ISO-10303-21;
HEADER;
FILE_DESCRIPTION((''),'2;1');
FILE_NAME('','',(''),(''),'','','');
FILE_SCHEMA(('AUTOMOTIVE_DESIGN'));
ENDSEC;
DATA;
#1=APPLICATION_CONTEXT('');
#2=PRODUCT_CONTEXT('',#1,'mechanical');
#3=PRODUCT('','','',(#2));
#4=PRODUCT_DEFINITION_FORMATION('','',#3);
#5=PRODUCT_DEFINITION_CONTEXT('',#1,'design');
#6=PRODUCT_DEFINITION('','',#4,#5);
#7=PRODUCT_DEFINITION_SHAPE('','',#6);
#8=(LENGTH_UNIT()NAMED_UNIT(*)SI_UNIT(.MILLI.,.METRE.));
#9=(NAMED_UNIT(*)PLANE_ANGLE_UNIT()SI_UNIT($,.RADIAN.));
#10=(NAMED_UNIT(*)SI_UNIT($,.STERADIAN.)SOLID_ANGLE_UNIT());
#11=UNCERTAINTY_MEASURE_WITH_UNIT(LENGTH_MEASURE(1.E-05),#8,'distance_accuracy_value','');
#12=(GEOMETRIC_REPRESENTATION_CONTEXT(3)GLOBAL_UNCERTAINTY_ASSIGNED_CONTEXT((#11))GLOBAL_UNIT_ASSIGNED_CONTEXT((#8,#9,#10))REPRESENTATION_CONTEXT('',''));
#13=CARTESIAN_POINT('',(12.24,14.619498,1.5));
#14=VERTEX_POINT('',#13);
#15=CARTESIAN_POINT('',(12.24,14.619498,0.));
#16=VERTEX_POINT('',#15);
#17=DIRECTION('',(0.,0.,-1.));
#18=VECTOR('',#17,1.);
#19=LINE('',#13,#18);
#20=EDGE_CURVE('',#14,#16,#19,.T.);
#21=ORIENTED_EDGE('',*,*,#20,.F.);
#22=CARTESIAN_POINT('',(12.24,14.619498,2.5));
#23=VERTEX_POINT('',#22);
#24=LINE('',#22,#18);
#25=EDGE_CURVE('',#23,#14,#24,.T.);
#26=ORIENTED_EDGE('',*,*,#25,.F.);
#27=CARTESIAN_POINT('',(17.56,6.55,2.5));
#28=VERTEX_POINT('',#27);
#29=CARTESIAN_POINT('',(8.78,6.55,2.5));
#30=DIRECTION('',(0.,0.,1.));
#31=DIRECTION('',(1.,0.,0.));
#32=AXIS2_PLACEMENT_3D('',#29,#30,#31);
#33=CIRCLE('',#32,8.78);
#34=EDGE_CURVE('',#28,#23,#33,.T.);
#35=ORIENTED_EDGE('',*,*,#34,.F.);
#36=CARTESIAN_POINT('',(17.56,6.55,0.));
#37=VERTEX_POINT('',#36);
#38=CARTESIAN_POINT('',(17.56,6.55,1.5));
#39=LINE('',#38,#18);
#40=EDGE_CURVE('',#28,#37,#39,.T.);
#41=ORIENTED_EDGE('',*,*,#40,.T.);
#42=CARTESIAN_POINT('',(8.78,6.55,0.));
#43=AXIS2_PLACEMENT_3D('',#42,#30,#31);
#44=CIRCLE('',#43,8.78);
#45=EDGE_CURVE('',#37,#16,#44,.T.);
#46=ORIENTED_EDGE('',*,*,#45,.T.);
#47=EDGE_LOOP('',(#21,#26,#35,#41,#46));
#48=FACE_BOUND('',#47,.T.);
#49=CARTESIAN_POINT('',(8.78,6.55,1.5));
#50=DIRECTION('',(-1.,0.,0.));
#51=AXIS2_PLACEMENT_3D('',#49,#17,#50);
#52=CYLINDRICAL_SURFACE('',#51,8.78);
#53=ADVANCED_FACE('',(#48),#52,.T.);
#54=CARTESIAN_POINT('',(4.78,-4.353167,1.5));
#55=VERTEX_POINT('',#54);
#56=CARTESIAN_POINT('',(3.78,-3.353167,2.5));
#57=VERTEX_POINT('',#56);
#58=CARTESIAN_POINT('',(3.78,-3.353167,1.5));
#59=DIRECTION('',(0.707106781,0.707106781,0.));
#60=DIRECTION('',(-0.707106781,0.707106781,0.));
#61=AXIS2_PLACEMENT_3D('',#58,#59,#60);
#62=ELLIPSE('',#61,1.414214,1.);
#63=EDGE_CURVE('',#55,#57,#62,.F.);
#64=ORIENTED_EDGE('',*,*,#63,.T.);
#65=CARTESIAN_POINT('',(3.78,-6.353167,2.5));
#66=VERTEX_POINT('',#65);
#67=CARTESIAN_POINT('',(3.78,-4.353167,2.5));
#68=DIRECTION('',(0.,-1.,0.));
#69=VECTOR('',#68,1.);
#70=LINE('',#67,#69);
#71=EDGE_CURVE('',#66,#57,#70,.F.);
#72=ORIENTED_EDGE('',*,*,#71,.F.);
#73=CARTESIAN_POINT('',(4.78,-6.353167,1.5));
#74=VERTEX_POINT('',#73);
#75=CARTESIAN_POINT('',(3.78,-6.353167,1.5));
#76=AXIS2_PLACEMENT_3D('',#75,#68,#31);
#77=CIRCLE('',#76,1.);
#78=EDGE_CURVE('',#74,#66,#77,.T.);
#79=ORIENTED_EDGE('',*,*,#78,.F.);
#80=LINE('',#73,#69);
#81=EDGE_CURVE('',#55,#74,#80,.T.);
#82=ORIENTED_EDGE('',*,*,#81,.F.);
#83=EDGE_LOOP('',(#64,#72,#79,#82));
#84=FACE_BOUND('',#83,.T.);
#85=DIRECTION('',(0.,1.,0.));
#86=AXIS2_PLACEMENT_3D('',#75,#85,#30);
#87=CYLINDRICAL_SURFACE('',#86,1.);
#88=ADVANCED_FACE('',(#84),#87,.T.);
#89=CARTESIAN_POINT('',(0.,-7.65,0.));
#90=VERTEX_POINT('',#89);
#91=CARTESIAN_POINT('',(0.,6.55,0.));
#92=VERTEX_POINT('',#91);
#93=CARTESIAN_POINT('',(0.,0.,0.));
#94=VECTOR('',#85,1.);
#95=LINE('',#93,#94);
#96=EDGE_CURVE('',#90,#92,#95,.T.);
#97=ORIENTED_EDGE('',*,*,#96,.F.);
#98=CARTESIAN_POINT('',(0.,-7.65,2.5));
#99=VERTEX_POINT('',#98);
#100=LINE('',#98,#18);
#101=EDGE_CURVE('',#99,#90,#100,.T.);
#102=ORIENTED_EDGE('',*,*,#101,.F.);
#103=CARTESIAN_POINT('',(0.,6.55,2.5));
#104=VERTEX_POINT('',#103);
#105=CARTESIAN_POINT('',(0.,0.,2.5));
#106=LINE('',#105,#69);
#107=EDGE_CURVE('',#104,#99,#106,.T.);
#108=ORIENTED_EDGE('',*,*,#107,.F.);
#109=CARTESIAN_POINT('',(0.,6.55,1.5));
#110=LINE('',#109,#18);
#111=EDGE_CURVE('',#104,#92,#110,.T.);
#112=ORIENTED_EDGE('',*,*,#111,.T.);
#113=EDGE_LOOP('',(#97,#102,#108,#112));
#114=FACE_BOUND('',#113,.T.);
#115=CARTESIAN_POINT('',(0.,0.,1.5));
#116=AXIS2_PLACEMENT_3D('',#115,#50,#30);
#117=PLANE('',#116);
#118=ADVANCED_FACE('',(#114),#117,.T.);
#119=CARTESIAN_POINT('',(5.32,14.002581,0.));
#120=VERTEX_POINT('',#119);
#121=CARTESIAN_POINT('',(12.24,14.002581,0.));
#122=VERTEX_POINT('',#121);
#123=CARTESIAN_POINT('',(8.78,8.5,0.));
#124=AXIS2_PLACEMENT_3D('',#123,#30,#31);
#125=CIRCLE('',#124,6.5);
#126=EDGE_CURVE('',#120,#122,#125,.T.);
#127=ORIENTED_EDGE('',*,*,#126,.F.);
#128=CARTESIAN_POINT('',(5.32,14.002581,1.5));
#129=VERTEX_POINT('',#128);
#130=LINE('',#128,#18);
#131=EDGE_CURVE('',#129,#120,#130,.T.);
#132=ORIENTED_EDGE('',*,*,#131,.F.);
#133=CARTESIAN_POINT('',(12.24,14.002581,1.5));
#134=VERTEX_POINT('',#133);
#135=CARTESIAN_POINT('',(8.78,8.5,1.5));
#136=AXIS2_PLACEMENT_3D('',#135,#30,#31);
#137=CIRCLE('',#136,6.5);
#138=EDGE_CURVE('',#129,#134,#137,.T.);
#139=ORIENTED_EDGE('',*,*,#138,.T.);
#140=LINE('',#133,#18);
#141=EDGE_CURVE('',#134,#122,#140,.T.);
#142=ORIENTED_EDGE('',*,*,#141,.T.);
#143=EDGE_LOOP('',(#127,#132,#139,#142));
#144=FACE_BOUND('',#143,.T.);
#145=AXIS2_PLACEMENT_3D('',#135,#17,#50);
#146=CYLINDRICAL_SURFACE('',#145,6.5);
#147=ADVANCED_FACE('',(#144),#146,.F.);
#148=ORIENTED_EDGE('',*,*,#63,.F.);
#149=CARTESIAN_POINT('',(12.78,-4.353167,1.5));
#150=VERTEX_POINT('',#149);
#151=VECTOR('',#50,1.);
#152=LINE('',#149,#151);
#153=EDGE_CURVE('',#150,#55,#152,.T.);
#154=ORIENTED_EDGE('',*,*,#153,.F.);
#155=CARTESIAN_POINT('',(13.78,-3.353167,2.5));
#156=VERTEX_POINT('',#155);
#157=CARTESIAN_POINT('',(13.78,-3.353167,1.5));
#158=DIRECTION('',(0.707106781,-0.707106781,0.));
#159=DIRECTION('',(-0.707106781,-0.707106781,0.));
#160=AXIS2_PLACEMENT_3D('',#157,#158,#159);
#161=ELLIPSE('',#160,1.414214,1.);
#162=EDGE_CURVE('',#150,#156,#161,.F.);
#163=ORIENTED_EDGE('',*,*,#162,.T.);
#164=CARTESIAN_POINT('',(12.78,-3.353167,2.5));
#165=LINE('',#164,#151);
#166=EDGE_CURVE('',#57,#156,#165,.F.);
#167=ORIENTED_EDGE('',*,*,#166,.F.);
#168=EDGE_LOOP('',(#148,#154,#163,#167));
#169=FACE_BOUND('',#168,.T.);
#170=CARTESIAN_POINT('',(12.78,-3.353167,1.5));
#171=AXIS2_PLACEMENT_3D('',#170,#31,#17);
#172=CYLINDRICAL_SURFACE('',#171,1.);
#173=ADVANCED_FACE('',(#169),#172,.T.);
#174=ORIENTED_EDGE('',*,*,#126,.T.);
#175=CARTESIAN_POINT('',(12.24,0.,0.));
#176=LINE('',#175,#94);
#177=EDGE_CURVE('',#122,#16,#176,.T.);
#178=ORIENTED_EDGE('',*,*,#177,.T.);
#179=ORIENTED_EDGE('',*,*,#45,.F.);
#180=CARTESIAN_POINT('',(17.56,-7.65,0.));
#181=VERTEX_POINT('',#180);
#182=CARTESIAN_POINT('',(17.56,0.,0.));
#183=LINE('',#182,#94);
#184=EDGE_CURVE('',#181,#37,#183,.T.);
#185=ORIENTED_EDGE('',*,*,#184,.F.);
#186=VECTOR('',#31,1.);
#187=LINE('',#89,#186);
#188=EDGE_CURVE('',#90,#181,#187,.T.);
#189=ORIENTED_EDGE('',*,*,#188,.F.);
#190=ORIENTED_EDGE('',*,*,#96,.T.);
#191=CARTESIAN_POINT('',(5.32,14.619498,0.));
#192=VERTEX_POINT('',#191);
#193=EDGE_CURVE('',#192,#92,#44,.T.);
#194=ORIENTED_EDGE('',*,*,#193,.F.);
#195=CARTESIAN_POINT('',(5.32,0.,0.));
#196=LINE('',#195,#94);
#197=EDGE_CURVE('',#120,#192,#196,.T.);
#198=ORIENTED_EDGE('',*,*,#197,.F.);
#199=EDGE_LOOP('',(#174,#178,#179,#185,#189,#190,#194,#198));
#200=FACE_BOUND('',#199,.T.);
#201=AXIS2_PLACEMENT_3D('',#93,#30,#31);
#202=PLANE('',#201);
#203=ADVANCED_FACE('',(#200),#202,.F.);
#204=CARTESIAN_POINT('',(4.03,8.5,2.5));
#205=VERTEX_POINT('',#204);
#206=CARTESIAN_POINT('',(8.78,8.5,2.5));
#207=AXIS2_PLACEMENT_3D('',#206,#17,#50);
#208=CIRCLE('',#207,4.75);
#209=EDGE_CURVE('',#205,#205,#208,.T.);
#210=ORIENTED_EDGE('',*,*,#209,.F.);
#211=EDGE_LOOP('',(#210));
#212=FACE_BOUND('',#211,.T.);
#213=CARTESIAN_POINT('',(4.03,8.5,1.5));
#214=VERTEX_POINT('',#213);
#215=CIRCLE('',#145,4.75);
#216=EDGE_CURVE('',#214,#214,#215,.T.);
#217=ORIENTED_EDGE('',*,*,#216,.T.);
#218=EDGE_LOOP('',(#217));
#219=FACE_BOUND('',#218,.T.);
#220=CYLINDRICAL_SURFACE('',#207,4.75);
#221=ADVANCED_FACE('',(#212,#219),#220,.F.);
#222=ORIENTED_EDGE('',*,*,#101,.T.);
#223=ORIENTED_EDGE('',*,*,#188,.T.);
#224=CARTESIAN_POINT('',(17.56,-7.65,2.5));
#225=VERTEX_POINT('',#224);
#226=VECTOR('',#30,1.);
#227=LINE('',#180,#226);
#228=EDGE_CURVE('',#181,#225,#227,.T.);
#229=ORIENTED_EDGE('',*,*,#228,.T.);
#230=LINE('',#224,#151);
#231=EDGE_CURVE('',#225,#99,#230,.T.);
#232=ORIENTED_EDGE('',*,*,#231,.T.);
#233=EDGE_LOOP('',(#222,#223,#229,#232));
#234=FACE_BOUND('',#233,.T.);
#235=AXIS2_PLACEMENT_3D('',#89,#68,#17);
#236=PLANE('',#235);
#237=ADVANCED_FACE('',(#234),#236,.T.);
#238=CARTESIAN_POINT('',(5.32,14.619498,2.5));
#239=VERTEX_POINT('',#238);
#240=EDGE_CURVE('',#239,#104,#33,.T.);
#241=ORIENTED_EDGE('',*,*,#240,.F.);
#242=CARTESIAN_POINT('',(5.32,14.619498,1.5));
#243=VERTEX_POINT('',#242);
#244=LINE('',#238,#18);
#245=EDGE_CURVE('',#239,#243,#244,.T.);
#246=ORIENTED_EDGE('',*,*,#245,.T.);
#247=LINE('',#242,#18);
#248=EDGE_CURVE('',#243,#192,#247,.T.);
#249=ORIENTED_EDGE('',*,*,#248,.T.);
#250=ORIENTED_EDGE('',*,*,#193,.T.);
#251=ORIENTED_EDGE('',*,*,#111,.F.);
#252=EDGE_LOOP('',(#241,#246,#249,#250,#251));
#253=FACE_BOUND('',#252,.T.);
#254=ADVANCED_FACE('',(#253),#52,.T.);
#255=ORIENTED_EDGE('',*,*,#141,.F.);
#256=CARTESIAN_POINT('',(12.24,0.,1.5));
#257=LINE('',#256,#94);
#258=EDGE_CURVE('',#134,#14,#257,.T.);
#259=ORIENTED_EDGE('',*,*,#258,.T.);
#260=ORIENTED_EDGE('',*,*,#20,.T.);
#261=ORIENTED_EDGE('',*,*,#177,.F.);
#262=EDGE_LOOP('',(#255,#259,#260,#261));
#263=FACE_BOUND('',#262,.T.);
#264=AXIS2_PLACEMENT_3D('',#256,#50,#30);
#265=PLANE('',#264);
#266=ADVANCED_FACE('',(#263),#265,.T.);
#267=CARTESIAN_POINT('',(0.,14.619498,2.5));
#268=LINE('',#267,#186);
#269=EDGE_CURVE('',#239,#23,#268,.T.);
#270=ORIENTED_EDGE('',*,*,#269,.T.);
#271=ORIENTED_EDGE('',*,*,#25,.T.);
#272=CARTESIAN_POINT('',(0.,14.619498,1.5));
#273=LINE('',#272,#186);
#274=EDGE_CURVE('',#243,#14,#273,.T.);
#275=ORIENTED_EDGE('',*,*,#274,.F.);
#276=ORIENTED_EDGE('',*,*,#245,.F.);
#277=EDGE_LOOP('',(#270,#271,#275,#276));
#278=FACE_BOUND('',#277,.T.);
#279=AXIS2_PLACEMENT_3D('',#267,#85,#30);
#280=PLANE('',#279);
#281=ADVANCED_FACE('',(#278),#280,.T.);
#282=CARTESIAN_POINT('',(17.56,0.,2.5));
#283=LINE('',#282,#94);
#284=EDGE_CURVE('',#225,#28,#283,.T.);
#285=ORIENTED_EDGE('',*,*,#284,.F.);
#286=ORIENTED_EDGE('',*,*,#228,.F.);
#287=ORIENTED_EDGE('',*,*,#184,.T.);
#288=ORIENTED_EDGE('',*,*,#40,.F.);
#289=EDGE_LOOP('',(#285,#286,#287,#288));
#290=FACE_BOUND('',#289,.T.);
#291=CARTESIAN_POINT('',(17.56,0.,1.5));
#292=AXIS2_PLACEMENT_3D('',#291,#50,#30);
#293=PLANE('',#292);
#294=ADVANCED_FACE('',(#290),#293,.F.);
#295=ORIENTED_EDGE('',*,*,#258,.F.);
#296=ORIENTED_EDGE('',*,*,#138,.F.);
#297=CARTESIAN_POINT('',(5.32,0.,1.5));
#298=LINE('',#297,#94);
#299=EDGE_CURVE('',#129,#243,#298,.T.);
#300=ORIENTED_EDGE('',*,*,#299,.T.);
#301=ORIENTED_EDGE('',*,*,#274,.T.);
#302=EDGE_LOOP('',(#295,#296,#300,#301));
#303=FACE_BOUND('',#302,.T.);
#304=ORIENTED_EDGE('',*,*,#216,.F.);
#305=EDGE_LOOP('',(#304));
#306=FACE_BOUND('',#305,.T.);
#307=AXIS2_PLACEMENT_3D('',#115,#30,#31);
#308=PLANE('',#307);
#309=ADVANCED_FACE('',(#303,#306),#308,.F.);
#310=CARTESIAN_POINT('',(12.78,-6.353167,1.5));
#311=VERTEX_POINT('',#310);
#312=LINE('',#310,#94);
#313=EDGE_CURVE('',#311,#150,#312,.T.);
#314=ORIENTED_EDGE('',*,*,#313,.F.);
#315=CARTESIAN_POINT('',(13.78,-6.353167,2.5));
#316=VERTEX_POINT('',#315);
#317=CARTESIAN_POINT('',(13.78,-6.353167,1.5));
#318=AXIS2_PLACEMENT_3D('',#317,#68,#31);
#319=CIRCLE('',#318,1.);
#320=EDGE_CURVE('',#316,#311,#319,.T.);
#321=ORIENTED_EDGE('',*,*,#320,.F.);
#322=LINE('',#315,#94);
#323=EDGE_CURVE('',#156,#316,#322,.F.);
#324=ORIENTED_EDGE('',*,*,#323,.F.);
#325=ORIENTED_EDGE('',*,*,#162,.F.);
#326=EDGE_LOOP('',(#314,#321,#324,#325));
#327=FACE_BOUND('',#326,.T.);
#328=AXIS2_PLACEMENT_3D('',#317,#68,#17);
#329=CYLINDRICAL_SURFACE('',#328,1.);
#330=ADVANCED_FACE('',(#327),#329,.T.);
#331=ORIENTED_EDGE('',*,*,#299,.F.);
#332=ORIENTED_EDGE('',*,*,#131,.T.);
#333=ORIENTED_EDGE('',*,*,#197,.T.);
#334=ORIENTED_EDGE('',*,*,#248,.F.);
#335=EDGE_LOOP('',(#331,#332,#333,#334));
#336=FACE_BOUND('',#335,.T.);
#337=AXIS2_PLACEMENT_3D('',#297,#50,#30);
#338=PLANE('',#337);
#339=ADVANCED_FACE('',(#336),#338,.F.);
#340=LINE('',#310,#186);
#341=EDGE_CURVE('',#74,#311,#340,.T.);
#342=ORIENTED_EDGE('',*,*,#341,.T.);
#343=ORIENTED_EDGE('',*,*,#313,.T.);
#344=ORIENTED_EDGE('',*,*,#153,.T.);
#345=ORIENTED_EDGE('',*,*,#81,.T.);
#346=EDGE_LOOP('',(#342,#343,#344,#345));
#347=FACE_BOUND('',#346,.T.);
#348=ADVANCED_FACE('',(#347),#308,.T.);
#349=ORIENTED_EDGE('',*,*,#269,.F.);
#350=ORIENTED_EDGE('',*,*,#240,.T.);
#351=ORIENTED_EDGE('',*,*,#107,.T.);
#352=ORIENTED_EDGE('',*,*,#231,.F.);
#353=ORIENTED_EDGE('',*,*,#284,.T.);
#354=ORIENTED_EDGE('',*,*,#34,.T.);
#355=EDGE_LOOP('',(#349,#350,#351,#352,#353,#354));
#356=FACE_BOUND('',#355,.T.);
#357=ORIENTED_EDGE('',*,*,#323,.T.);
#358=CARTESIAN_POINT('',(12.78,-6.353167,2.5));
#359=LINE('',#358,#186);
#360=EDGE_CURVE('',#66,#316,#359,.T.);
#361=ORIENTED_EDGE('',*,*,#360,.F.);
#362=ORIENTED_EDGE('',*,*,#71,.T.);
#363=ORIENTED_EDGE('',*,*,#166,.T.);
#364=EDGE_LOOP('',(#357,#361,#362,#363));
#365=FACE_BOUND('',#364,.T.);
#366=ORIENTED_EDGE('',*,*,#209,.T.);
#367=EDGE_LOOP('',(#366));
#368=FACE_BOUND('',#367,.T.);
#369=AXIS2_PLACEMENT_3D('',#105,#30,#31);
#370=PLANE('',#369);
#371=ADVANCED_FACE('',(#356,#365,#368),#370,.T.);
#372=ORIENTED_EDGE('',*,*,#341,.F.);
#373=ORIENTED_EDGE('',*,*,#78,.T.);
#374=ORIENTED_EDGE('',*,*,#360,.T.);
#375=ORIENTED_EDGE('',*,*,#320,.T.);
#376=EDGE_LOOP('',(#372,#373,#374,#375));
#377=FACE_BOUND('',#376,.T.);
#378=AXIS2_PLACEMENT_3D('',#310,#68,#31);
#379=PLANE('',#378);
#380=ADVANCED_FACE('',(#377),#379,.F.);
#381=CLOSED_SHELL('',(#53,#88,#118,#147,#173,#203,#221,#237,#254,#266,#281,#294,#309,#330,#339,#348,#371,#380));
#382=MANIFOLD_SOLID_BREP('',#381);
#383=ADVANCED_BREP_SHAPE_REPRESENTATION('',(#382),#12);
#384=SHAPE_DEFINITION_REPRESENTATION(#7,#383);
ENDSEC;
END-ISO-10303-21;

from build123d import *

# Parameters (mm, degrees)
BOSS_EXTRUDE1_DEPTH = 1.5
BOSS_EXTRUDE2_DEPTH = 1
SKETCH4_R           = 4.75
CUT_EXTRUDE1_DEPTH  = 23.898325822
SKETCH5_W           = 17.56
SKETCH5_H           = 2.5
BOSS_EXTRUDE3_DEPTH = 0.15
SKETCH6_W           = 17.56
SKETCH6_H           = 2.5
BOSS_EXTRUDE4_DEPTH = 7.5
SKETCH9_W           = 8
SKETCH9_H           = 2
CUT_EXTRUDE2_DEPTH  = 1
FILLET1_R           = 1


with BuildPart() as part:
    # Sketch1 → Boss-Extrude1 (new body)
    with BuildSketch(Plane.XY):
        with BuildLine():
            ThreePointArc((14.980604809, 6.55), (8.78, 2), (2.579395191, 6.55))
            Line((2.579395191, 6.55), (0, 6.55))
            Line((0, 6.55), (0, 0))
            Line((0, 0), (17.56, 0))
            Line((17.56, 0), (17.56, 6.55))
            Line((17.56, 6.55), (14.980604809, 6.55))
        make_face()
        with BuildLine():
            ThreePointArc((2.579395191, 6.55), (2.679421093, 10.743420825), (5.32, 14.002581212))
            Line((5.32, 14.002581212), (5.32, 14.619498126))
            ThreePointArc((5.32, 14.619498126), (1.449679407, 11.382680416), (0, 6.55))
            Line((0, 6.55), (2.579395191, 6.55))
        make_face()
        with BuildLine():
            ThreePointArc((12.24, 14.002581212), (14.880578907, 10.743420825), (14.980604809, 6.55))
            Line((14.980604809, 6.55), (17.56, 6.55))
            ThreePointArc((17.56, 6.55), (16.110320593, 11.382680416), (12.24, 14.619498126))
            Line((12.24, 14.619498126), (12.24, 14.002581212))
        make_face()
    extrude(amount=BOSS_EXTRUDE1_DEPTH)

    # Sketch3 → Boss-Extrude2 (add)
    with BuildSketch(Plane.XY.offset(1.5)):
        with BuildLine():
            Line((12.24, 14.619498126), (12.24, 14.002581212))
            ThreePointArc((12.24, 14.002581212), (8.78, 2), (5.32, 14.002581212))
            Line((5.32, 14.002581212), (5.32, 14.619498126))
            ThreePointArc((5.32, 14.619498126), (1.449679407, 11.382680416), (0, 6.55))
            Line((0, 6.55), (0, 0))
            Line((0, 0), (17.56, 0))
            Line((17.56, 0), (17.56, 6.55))
            ThreePointArc((17.56, 6.55), (16.110320593, 11.382680416), (12.24, 14.619498126))
        make_face()
        with BuildLine():
            Line((5.32, 14.619498126), (12.24, 14.619498126))
            Line((12.24, 14.619498126), (12.24, 14.002581212))
            ThreePointArc((12.24, 14.002581212), (8.78, 2), (5.32, 14.002581212))
            Line((5.32, 14.002581212), (5.32, 14.619498126))
        make_face()
    extrude(amount=BOSS_EXTRUDE2_DEPTH)

    # Sketch4 → Cut-Extrude1 (cut, through all)
    with BuildSketch(Plane(origin=(0, 0, 1.5), x_dir=(-1, 0, 0), z_dir=(0, 0, -1))):
        with Locations((-8.78, 8.5)):
            Circle(SKETCH4_R)
    extrude(amount=-CUT_EXTRUDE1_DEPTH, mode=Mode.SUBTRACT)

    # Sketch5 → Boss-Extrude3 (add)
    with BuildSketch(Plane.XZ):
        with Locations((8.78, 1.25)):
            Rectangle(SKETCH5_W, SKETCH5_H)
    extrude(amount=BOSS_EXTRUDE3_DEPTH)

    # Sketch6 → Boss-Extrude4 (add)
    with BuildSketch(Plane.XZ.offset(0.15)):
        with Locations((8.78, 1.25)):
            Rectangle(SKETCH6_W, SKETCH6_H)
    extrude(amount=BOSS_EXTRUDE4_DEPTH)

    # Sketch9 → Cut-Extrude2 (cut)
    with BuildSketch(Plane.XY.offset(2.5)):
        with Locations((8.78, -5.353166831)):
            Rectangle(SKETCH9_W, SKETCH9_H)
    extrude(amount=-CUT_EXTRUDE2_DEPTH, mode=Mode.SUBTRACT)

    # Fillet1
    fillet1_edges = [part.edges().sort_by_distance(p)[0] for p in [
        (4.78, -5.353166831, 2.5),
        (12.78, -5.353166831, 2.5),
        (8.78, -4.353166831, 2.5),
    ]]
    fillet(fillet1_edges, radius=FILLET1_R - 0.0001)  # a hair under: the kernel refuses the full size


solid = part.part
